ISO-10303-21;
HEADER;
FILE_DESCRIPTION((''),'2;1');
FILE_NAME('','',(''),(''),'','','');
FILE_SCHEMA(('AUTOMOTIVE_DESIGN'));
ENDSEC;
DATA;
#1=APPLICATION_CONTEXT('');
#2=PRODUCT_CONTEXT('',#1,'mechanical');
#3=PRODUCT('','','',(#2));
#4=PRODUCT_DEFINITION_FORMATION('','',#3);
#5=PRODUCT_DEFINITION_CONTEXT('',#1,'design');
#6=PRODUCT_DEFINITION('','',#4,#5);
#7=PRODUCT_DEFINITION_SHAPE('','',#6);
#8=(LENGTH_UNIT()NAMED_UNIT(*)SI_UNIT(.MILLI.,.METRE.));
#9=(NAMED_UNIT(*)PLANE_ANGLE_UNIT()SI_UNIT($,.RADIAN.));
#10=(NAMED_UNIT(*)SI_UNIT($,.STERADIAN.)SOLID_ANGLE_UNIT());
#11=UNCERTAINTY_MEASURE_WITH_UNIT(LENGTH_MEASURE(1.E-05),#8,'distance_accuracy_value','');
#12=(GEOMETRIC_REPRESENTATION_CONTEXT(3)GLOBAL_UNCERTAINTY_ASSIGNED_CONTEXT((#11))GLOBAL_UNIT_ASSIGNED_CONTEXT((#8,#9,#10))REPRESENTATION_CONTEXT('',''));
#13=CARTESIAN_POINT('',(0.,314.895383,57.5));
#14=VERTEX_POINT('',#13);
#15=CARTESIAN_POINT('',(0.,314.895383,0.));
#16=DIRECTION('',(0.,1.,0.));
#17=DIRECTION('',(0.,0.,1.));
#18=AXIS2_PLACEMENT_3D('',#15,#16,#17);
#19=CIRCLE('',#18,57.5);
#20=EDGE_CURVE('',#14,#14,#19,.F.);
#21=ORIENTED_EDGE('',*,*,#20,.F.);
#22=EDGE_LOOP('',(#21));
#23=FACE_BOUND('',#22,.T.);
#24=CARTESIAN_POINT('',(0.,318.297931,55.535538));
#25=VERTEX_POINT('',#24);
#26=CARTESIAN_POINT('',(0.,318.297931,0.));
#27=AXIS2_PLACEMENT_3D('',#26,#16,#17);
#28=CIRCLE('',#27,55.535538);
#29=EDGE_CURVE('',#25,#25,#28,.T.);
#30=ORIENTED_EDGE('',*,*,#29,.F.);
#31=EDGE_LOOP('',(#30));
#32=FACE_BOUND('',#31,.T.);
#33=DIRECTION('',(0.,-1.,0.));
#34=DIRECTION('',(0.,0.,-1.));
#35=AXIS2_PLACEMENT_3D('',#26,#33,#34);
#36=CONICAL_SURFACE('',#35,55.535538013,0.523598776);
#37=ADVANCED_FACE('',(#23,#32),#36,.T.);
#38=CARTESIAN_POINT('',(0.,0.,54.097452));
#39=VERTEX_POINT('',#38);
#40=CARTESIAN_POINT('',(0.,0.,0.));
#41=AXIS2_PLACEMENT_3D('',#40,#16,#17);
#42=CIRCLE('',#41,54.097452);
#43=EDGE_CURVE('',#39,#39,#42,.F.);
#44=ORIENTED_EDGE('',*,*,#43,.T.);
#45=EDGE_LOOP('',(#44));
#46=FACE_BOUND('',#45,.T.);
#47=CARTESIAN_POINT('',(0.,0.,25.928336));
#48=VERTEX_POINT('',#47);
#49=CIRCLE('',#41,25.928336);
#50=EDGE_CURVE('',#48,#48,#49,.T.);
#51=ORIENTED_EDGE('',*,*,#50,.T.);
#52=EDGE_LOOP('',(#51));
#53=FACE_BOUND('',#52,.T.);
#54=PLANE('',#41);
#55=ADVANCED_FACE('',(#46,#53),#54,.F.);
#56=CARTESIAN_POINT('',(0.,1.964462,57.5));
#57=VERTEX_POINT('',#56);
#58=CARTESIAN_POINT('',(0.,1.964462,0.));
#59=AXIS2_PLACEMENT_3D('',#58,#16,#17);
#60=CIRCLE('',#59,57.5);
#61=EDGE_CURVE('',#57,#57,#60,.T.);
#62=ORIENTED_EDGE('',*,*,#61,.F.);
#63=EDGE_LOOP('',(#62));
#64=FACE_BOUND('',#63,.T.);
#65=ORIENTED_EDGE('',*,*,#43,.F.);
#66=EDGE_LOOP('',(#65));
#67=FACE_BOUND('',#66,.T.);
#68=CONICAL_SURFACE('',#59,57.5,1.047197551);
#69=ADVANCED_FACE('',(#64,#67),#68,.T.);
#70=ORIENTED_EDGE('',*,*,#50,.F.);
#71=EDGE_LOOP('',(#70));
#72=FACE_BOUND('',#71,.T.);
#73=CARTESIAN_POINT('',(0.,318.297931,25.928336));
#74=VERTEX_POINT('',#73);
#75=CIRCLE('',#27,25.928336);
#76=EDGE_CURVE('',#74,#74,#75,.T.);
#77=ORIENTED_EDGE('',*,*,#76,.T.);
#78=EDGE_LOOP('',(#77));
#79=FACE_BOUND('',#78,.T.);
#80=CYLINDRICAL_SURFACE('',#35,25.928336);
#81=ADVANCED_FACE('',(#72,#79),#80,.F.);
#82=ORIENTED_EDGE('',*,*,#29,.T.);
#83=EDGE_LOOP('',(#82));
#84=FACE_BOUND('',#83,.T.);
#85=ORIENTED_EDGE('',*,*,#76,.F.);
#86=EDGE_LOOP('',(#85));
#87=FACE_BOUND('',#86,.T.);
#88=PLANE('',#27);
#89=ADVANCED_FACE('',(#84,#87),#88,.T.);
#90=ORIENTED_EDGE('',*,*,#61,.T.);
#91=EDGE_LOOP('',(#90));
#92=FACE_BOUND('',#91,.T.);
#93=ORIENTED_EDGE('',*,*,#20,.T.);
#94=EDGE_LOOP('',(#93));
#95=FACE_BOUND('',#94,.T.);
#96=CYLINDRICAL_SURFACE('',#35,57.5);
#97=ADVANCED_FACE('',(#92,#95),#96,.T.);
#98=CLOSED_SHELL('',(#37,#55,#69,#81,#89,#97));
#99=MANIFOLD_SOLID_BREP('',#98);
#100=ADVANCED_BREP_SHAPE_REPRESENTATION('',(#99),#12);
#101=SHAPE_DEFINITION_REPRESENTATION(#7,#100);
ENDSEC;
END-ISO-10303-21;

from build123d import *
from OCP.BRepFilletAPI import BRepFilletAPI_MakeChamfer

# Parameters (mm, degrees)
SKETCH1_R           = 57.5
BOSS_EXTRUDE1_DEPTH = 318.297930586
SKETCH2_R           = 25.928335976
CUT_EXTRUDE1_DEPTH  = 329.521038314
CHAMFER1_SIZE       = 3.402547971
CHAMFER1_SIZE2      = 1.964461987


with BuildPart() as part:
    # Sketch1 → Boss-Extrude1 (new body)
    with BuildSketch(Plane(origin=(0, 0, 0), x_dir=(1, 0, 0), z_dir=(0, 1, 0))):
        Circle(SKETCH1_R)
    extrude(amount=BOSS_EXTRUDE1_DEPTH)

    # Sketch2 → Cut-Extrude1 (cut, through all)
    with BuildSketch(Plane(origin=(0, 0, 0), x_dir=(1, 0, 0), z_dir=(0, 1, 0))):
        Circle(SKETCH2_R)
    extrude(amount=CUT_EXTRUDE1_DEPTH, mode=Mode.SUBTRACT)

    # Chamfer1: one chamfer whose edges measure the first distance from different faces: ONE call of the kernel's chamfer builder (chamfer() names one face for all edges)
    chamfer1_edges_1 = [part.edges().sort_by_distance(p)[0] for p in [
        (-57.5, 318.297930586, 0),
    ]]
    chamfer1_side_1 = [part.faces().sort_by_distance(p)[0] for p in [
        (-57.5, 159.148965293, 0),
    ]]
    chamfer1_edges_2 = [part.edges().sort_by_distance(p)[0] for p in [
        (-57.5, 0, 0),
    ]]
    chamfer1_side_2 = [part.faces().sort_by_distance(p)[0] for p in [
        (-55.873654403, 0, 0),
    ]]
    chamfer1 = BRepFilletAPI_MakeChamfer(part.part.solid().wrapped)
    for e in chamfer1_edges_1:
        chamfer1.Add(CHAMFER1_SIZE, CHAMFER1_SIZE2, e.wrapped, chamfer1_side_1[0].wrapped)  # the first distance lies on this face
    for e in chamfer1_edges_2:
        chamfer1.Add(CHAMFER1_SIZE, CHAMFER1_SIZE2, e.wrapped, chamfer1_side_2[0].wrapped)  # the first distance lies on this face
    add(Compound.cast(chamfer1.Shape()), mode=Mode.REPLACE)


solid = part.part
